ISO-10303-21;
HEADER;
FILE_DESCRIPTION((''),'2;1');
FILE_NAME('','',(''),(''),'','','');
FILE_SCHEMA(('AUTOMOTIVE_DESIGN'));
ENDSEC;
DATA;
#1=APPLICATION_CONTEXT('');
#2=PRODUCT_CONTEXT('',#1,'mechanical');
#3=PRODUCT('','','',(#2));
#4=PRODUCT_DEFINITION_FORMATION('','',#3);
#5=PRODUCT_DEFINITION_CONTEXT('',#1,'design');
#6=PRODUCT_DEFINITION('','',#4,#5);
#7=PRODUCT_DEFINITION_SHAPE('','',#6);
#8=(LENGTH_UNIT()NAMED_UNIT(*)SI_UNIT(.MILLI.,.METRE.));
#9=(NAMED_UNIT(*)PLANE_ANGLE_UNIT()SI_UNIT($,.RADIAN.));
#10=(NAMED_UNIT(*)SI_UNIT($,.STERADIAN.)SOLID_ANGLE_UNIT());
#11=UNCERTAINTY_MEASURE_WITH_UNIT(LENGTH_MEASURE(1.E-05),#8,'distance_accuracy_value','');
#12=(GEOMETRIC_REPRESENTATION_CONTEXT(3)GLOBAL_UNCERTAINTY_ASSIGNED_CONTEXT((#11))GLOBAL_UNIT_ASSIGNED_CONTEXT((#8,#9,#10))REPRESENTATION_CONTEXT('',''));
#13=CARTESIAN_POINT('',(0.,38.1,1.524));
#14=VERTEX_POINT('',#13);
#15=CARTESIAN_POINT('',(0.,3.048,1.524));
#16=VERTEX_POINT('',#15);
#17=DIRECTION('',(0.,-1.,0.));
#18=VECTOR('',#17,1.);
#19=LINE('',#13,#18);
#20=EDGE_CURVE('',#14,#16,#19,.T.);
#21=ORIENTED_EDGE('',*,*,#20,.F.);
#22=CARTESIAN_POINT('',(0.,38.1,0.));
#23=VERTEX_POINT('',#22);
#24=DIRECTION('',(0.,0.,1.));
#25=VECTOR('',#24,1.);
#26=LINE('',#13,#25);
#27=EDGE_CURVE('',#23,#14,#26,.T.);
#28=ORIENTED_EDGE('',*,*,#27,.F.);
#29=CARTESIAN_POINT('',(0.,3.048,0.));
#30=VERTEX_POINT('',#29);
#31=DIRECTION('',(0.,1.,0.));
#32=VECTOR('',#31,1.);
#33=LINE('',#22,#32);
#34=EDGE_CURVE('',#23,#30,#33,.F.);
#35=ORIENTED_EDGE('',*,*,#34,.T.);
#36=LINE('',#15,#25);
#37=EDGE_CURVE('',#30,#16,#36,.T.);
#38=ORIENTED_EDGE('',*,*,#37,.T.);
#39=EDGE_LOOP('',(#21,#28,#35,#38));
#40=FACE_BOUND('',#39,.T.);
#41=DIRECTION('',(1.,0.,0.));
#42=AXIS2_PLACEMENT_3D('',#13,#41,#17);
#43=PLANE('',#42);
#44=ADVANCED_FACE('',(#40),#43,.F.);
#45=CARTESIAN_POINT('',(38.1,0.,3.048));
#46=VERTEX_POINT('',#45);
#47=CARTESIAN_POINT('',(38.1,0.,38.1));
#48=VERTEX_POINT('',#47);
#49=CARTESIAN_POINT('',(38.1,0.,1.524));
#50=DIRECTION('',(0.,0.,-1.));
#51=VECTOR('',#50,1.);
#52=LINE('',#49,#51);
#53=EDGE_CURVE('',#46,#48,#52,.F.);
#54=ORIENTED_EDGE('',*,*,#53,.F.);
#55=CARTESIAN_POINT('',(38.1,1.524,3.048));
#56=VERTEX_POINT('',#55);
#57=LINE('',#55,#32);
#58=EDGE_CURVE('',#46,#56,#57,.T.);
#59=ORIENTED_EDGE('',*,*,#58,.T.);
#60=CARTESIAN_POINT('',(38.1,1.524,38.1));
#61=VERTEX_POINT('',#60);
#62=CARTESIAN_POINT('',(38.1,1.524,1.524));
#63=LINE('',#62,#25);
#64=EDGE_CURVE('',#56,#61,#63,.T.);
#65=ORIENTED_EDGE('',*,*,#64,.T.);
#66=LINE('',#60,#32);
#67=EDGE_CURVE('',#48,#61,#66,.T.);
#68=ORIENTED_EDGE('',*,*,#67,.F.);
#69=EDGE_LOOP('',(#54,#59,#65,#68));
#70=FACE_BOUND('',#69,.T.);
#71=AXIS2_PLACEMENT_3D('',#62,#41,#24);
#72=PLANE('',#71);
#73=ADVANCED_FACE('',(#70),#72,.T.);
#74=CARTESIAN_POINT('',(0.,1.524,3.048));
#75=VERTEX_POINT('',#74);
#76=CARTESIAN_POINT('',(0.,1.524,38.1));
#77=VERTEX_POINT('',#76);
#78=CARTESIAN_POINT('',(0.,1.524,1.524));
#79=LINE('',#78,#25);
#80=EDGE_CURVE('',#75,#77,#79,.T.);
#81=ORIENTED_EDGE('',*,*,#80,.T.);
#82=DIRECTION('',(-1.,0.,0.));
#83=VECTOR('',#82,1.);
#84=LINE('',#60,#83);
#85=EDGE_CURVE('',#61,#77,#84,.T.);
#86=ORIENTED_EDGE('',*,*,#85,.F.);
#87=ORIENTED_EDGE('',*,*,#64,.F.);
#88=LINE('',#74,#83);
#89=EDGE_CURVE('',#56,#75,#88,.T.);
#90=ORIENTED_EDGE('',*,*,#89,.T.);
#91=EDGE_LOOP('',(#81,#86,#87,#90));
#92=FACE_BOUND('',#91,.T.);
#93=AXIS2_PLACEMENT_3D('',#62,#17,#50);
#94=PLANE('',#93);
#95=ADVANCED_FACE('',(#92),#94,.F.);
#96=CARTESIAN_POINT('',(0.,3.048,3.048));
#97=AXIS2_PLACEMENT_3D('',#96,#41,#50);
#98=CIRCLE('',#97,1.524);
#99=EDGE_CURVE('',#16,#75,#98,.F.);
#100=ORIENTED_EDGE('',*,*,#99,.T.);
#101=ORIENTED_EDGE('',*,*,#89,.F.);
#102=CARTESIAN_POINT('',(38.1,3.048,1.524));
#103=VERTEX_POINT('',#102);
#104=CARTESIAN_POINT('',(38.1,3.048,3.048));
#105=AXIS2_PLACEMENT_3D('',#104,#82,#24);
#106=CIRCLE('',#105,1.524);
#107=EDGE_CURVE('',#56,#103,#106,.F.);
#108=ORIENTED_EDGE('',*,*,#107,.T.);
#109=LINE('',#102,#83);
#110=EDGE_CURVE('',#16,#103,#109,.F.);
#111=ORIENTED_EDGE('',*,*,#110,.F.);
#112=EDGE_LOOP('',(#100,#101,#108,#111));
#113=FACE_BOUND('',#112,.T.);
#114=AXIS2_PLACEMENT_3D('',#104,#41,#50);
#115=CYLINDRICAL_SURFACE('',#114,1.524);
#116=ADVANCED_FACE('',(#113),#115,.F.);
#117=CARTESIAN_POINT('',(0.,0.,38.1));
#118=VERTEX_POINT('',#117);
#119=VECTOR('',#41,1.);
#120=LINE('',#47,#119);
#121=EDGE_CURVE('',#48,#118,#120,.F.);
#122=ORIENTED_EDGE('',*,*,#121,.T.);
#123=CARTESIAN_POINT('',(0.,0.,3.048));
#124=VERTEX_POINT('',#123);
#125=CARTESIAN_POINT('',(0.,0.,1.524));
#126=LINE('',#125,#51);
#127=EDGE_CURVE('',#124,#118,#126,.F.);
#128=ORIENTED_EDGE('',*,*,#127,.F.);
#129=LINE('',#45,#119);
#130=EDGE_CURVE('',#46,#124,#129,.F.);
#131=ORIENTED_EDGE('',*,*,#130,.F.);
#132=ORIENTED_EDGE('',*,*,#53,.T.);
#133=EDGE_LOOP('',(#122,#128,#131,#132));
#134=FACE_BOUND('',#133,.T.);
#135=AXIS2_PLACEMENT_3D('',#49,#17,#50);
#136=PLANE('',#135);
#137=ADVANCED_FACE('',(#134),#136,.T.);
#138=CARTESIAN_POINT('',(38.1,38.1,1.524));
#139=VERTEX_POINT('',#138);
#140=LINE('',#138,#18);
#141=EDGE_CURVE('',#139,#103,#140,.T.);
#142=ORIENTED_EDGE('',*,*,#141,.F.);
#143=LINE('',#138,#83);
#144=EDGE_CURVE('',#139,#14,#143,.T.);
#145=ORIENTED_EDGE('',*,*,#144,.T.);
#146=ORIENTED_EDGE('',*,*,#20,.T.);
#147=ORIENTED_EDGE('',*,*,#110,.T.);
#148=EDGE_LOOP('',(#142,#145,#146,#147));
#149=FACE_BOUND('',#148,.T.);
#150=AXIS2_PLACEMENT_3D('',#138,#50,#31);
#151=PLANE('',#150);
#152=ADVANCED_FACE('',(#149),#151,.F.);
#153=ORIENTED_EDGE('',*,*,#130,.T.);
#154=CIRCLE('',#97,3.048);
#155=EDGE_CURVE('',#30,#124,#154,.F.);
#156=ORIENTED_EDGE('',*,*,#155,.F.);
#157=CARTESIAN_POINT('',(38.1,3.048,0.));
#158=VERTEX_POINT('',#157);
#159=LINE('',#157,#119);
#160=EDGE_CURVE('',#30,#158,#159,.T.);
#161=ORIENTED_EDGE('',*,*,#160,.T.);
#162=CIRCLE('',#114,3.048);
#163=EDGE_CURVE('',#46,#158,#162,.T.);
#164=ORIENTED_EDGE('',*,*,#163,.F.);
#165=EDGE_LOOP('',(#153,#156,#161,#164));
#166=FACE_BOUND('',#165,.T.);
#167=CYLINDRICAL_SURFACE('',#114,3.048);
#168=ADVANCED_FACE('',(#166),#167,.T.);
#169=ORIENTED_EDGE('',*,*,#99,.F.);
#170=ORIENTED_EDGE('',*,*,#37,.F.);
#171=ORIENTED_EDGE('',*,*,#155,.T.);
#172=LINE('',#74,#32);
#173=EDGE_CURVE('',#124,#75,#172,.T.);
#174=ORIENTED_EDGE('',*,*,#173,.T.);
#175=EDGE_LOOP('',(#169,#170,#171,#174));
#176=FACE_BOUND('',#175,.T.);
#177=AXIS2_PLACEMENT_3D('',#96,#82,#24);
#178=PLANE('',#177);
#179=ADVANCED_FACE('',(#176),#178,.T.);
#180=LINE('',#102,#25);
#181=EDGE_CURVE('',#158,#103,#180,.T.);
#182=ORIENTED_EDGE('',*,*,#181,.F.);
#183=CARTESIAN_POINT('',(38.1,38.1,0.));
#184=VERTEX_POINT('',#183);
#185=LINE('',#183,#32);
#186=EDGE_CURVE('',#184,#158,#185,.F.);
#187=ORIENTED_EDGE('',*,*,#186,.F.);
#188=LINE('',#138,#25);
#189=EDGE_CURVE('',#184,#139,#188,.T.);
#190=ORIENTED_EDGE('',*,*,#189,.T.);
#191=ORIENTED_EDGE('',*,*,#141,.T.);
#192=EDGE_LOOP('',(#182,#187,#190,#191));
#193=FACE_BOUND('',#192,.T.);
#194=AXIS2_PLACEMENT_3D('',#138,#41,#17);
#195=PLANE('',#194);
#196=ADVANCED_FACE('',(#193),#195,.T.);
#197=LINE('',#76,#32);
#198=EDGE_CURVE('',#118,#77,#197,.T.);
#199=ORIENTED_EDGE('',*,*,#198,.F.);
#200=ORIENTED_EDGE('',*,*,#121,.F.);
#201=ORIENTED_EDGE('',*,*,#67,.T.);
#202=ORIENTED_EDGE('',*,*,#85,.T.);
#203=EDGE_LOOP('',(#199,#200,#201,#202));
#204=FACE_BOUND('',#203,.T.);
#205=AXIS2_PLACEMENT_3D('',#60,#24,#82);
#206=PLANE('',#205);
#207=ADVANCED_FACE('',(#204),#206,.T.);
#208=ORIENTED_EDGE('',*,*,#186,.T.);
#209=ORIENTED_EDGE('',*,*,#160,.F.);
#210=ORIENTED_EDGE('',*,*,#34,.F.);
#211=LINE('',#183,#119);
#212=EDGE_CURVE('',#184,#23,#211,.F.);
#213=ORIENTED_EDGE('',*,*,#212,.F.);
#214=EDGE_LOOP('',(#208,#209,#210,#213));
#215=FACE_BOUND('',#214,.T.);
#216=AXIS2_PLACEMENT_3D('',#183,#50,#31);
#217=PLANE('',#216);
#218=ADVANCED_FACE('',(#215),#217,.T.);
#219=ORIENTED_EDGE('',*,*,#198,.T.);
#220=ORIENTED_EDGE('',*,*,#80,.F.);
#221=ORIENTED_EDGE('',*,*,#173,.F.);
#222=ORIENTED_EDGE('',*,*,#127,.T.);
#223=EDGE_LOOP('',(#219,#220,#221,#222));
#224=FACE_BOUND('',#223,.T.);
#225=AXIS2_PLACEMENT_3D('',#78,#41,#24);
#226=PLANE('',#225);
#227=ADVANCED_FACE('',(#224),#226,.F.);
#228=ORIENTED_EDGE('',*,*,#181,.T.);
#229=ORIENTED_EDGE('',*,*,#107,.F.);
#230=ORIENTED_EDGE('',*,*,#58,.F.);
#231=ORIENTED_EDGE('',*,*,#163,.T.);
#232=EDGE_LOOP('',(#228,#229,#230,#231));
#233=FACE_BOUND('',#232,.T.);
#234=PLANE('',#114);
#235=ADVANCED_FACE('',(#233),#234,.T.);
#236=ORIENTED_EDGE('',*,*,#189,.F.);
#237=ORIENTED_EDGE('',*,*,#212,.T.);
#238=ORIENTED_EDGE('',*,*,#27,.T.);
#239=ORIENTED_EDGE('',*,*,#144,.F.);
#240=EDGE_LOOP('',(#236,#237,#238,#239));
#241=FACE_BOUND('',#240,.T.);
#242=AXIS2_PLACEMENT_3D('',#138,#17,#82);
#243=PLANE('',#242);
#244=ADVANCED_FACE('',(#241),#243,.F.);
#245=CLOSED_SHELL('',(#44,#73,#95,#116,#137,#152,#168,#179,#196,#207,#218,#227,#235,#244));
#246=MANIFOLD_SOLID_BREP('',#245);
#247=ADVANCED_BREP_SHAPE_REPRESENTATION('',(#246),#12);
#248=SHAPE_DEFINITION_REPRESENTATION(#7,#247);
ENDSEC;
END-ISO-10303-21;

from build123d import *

# Parameters (mm, degrees)
BOSS_EXTRUDE1_DEPTH    = 38.1
CONVERT_SOLID1_DEPTH   = 38.1
CONVERT_SOLID1_2_DEPTH = 38.1


# Read off the part's stored shape, not the designer's step: Convert-Solid1
with BuildPart() as part:
    # Sketch1 → Boss-Extrude1 (new body)
    with BuildSketch(Plane(origin=(0, 0, 0), x_dir=(0, 0, -1), z_dir=(1, 0, 0))):
        Polygon((-1.524, 38.1), (-1.524, 1.524), (-38.1, 1.524), (-38.1, 0), (0, 0), (0, 38.1), align=None)
    extrude(amount=BOSS_EXTRUDE1_DEPTH)

    # Convert-Solid1 outline → Convert-Solid1 (cut)
    with BuildSketch(Plane.YZ):
        with BuildLine():
            ThreePointArc((3.048, 0), (0.892738531, 0.892738531), (0, 3.048))
            Line((0, 3.048), (0, 0))
            Line((0, 0), (3.048, 0))
        make_face()
    extrude(amount=CONVERT_SOLID1_DEPTH, mode=Mode.SUBTRACT)

    # Convert-Solid1 2 outline → Convert-Solid1 2 (add)
    with BuildSketch(Plane.YZ):
        with BuildLine():
            ThreePointArc((3.048, 1.524), (1.970369265, 1.970369265), (1.524, 3.048))
            Line((1.524, 3.048), (1.524, 1.524))
            Line((1.524, 1.524), (3.048, 1.524))
        make_face()
    extrude(amount=CONVERT_SOLID1_2_DEPTH)


solid = part.part
